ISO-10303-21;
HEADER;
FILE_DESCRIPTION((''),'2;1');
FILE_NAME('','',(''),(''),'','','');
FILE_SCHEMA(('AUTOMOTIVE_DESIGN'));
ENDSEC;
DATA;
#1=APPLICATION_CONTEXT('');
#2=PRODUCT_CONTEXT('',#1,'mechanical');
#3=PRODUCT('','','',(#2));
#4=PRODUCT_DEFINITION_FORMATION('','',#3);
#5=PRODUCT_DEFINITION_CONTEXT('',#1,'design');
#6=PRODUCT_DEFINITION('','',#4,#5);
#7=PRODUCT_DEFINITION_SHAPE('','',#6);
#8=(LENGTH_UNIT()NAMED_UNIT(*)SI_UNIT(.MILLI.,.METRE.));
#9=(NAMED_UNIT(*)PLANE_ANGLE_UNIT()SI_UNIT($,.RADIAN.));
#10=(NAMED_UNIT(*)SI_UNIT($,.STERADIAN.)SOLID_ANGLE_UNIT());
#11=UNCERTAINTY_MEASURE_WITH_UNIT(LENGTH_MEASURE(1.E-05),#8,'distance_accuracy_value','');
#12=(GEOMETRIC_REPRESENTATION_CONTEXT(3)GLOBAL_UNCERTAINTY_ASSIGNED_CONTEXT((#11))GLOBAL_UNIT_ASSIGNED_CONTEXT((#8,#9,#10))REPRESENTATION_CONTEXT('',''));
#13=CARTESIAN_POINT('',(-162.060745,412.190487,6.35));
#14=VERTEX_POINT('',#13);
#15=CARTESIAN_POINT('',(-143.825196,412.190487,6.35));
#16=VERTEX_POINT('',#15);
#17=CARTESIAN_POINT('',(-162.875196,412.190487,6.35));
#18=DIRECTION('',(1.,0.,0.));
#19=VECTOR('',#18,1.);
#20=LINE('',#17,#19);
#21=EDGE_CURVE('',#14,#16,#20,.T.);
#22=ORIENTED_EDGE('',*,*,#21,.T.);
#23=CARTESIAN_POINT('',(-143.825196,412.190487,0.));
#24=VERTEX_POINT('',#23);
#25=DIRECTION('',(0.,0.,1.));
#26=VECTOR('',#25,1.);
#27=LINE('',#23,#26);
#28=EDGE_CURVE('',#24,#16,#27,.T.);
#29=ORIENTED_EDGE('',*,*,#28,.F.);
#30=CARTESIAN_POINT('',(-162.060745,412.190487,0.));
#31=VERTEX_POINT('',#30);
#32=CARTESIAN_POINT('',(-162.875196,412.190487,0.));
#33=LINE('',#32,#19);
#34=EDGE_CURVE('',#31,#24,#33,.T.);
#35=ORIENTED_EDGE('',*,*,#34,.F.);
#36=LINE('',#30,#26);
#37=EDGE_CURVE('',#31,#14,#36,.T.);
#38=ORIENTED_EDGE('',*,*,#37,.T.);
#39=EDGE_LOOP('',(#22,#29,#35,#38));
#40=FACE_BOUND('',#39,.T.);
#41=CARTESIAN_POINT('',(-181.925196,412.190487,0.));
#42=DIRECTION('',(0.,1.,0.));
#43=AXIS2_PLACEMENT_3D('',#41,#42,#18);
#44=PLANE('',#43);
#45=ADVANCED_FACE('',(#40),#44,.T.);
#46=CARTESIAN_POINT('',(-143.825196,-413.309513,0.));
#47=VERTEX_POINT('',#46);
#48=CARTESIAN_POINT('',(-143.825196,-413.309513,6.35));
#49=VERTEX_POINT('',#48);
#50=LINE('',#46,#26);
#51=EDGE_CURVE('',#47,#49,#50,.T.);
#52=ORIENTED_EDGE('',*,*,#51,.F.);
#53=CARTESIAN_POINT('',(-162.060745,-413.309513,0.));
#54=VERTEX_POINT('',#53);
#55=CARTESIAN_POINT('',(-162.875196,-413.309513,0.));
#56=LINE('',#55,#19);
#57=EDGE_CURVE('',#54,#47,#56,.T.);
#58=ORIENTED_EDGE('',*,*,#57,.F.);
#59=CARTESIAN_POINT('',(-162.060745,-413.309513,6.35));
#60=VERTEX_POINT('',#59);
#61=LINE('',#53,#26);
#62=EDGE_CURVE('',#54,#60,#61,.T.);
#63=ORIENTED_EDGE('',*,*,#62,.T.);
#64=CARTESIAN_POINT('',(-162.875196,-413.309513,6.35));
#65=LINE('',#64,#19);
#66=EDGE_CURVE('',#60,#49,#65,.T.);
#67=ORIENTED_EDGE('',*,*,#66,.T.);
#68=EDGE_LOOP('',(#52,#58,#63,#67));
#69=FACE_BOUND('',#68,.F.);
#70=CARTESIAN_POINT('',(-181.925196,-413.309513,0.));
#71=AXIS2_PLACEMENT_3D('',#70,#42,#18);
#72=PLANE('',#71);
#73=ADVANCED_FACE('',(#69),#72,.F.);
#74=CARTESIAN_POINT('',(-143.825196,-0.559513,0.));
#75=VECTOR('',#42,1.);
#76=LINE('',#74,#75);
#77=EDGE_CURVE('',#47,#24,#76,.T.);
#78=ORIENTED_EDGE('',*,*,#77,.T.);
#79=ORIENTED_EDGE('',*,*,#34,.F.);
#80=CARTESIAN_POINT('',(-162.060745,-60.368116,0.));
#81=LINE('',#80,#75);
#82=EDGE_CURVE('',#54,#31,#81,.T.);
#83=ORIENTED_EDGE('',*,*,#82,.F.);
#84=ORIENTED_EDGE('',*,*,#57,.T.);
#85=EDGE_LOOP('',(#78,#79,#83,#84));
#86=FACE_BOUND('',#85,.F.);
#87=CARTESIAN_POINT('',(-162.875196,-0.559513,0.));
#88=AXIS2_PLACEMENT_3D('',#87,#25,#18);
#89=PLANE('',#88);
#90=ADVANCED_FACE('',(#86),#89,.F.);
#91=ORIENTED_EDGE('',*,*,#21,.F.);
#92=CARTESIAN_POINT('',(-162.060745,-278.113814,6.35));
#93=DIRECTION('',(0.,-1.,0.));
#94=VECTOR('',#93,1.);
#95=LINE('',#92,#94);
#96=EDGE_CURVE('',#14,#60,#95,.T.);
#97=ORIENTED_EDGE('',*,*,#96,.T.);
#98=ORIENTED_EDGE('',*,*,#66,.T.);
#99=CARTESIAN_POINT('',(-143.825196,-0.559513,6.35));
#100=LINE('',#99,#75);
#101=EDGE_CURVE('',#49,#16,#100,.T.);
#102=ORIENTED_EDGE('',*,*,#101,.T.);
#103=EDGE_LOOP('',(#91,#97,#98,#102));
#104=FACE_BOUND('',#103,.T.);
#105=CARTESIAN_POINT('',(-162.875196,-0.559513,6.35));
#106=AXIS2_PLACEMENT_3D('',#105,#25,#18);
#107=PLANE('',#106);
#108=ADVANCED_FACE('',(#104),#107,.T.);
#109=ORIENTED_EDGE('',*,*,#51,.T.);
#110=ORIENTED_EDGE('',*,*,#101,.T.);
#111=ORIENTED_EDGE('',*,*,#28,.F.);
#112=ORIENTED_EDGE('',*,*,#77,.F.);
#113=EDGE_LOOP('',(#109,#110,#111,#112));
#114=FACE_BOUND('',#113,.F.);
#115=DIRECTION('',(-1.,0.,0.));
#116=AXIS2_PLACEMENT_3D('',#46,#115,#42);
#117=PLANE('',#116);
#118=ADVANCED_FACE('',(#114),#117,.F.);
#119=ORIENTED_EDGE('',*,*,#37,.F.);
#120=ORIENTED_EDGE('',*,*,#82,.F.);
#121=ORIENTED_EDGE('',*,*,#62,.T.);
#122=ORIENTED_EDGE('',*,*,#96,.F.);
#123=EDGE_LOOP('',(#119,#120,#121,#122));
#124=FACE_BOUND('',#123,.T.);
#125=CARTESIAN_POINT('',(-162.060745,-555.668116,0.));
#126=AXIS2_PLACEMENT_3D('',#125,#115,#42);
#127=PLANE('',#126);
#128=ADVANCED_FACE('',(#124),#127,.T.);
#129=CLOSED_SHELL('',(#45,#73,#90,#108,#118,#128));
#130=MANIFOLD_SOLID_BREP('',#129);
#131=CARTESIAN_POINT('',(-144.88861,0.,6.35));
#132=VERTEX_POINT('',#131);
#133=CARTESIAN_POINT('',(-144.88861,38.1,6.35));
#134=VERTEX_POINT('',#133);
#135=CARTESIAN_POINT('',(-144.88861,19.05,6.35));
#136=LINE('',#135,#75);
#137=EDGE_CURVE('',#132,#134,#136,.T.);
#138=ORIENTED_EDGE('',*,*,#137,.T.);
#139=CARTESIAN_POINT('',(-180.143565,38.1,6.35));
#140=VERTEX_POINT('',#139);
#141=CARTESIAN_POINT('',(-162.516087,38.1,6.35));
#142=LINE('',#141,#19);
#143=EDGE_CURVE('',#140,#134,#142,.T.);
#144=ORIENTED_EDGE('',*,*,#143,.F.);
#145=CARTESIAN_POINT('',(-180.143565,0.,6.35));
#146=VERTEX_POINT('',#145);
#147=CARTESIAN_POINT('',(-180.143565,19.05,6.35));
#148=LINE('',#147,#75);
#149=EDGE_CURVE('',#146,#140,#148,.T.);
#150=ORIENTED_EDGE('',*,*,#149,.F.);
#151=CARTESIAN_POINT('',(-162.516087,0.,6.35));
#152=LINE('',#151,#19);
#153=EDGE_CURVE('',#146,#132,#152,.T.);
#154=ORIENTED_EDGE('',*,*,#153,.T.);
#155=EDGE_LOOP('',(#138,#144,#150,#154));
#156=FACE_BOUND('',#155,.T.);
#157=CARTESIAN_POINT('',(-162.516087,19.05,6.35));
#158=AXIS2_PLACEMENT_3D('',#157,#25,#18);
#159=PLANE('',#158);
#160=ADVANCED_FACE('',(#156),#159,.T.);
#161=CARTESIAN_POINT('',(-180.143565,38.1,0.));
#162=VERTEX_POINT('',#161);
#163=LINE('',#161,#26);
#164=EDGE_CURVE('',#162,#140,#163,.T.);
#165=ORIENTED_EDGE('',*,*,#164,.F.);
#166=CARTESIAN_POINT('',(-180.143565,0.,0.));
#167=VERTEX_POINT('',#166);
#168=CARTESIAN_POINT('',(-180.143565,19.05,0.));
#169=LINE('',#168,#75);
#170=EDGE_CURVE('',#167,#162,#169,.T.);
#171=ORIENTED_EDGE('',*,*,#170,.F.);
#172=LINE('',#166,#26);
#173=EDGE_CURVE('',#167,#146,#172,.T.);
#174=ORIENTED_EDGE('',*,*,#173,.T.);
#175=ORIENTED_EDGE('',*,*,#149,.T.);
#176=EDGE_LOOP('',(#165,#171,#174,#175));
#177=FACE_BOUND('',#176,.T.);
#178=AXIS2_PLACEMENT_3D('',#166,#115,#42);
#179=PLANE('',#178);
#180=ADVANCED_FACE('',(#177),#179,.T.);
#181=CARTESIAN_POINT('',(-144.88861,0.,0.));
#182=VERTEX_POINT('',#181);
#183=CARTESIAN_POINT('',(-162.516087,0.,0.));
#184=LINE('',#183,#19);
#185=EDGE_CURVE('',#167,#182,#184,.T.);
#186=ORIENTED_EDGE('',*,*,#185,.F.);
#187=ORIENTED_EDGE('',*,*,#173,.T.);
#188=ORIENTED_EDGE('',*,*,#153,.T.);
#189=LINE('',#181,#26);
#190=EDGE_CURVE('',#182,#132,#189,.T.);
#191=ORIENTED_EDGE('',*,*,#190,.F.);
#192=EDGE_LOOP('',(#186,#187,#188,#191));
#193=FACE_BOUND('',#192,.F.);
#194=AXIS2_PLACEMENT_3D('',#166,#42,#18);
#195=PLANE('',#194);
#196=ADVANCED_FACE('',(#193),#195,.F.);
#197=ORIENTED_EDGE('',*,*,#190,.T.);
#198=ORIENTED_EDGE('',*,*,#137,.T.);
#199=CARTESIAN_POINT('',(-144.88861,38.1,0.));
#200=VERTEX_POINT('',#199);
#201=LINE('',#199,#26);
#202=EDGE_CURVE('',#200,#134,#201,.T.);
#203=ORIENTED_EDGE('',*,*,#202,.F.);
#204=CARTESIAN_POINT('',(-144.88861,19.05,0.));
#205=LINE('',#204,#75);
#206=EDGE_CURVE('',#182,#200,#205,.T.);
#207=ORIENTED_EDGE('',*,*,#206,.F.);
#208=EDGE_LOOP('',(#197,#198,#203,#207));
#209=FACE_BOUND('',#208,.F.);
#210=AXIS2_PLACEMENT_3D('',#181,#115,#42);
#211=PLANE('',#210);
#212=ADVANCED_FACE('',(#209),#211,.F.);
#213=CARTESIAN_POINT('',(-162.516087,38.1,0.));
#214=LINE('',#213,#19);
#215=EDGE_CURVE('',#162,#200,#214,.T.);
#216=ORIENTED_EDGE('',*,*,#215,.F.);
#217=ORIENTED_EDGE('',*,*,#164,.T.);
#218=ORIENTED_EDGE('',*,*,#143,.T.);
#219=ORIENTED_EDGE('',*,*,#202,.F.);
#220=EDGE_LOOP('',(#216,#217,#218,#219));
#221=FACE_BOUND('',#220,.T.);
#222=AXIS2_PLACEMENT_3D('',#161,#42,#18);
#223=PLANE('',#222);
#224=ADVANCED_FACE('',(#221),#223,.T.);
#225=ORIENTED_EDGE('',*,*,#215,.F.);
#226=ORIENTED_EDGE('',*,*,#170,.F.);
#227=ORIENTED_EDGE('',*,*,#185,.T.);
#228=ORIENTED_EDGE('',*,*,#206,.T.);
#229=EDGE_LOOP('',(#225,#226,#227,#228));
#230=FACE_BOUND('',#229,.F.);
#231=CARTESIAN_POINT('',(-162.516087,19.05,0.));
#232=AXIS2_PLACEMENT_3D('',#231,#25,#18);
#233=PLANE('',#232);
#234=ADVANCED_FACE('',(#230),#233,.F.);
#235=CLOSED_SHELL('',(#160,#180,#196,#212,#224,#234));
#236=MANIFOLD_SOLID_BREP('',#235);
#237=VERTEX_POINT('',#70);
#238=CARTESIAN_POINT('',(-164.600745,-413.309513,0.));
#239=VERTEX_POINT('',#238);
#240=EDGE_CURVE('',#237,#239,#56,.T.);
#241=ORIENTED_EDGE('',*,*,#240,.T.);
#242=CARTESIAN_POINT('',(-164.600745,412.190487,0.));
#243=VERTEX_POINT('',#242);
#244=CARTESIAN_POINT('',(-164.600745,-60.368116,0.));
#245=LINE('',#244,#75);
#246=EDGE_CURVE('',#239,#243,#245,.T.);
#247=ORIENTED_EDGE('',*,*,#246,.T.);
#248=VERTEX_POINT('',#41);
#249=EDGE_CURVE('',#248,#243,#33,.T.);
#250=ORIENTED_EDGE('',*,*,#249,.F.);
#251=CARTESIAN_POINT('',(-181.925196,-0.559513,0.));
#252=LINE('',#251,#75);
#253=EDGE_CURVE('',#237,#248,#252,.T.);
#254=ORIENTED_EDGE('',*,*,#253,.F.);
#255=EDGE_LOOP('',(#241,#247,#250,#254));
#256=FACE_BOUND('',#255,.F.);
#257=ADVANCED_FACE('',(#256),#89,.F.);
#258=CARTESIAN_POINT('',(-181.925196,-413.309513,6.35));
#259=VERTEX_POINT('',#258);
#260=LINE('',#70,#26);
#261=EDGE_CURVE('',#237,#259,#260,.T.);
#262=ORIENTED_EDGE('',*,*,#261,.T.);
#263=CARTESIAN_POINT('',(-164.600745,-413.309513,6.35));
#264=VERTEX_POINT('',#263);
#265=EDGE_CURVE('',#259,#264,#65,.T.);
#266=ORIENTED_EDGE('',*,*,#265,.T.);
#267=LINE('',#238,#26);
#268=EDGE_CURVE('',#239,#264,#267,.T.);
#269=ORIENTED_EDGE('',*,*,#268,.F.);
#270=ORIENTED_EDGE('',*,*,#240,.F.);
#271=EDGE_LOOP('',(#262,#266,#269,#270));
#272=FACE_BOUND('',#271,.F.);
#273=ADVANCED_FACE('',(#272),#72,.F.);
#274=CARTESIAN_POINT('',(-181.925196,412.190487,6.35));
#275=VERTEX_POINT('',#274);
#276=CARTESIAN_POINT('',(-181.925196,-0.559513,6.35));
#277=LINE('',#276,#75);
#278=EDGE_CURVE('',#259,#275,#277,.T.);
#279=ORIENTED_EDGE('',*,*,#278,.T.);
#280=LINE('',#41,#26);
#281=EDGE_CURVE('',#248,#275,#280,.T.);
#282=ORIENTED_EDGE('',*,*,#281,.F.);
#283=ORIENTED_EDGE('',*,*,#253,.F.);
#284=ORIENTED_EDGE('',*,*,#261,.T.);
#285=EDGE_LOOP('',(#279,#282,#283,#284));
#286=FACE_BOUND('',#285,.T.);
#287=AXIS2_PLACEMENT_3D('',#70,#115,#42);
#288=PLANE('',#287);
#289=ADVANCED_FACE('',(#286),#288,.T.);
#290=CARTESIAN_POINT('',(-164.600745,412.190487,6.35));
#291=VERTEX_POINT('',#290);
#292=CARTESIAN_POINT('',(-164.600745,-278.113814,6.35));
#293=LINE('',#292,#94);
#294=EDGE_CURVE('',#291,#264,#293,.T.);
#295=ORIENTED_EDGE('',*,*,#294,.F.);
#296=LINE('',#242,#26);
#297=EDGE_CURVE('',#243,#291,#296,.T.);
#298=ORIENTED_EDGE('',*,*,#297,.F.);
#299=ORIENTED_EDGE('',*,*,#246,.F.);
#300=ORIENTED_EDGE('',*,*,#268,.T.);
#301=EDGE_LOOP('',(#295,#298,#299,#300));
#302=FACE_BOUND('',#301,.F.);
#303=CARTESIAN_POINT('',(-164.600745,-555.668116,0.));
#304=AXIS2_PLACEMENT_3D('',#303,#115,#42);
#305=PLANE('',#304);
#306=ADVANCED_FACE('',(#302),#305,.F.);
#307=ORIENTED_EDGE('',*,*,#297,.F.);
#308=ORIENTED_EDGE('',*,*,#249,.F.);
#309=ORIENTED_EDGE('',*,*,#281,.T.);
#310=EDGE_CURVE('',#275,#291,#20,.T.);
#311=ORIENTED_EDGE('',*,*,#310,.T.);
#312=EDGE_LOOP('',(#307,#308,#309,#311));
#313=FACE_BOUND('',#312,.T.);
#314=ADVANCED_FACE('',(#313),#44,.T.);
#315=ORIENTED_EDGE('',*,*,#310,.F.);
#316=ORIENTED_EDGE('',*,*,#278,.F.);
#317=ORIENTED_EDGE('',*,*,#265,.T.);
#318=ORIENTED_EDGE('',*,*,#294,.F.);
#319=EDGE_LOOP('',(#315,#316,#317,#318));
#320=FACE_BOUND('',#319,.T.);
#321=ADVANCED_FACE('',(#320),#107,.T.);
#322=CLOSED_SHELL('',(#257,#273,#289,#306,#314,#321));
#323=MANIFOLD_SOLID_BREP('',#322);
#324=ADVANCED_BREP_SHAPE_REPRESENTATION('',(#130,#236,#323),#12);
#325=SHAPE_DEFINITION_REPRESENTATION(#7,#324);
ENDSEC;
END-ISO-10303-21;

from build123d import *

# Parameters (mm, degrees)
F0_W     = 38.1
F0_H     = 825.5
F2_DEPTH = 6.35
F1_W     = 2.54
F1_H     = 990.6
F3_DEPTH = 284.48
F4_W     = 35.2549552917
F4_H     = 38.1
F5_DEPTH = 6.35


# Not quite as in the source:
# - a feature of the source that left no trace in its solid (it failed there, or was rolled back) is left out


with BuildPart() as f2:
    # F0 (on Top) → F2 (new body)
    with BuildSketch(Plane.XY):
        with Locations((-162.8751962613, -0.5595125258)):
            Rectangle(F0_W, F0_H)
    extrude(amount=F2_DEPTH)

    # F1 (on face) → F3 (cut)
    with BuildSketch(Plane.XY):
        with Locations((-163.3307448435, -60.3681156158)):
            Rectangle(F1_W, F1_H)
    extrude(amount=F3_DEPTH, mode=Mode.SUBTRACT)


with BuildPart() as f5:
    # F4 (on face) → F5 (new body)
    with BuildSketch(Plane.XY):
        with Locations((-162.5160872936, 19.05)):
            Rectangle(F4_W, F4_H)
    extrude(amount=F5_DEPTH)


solid = Compound([f2.part, f5.part])
